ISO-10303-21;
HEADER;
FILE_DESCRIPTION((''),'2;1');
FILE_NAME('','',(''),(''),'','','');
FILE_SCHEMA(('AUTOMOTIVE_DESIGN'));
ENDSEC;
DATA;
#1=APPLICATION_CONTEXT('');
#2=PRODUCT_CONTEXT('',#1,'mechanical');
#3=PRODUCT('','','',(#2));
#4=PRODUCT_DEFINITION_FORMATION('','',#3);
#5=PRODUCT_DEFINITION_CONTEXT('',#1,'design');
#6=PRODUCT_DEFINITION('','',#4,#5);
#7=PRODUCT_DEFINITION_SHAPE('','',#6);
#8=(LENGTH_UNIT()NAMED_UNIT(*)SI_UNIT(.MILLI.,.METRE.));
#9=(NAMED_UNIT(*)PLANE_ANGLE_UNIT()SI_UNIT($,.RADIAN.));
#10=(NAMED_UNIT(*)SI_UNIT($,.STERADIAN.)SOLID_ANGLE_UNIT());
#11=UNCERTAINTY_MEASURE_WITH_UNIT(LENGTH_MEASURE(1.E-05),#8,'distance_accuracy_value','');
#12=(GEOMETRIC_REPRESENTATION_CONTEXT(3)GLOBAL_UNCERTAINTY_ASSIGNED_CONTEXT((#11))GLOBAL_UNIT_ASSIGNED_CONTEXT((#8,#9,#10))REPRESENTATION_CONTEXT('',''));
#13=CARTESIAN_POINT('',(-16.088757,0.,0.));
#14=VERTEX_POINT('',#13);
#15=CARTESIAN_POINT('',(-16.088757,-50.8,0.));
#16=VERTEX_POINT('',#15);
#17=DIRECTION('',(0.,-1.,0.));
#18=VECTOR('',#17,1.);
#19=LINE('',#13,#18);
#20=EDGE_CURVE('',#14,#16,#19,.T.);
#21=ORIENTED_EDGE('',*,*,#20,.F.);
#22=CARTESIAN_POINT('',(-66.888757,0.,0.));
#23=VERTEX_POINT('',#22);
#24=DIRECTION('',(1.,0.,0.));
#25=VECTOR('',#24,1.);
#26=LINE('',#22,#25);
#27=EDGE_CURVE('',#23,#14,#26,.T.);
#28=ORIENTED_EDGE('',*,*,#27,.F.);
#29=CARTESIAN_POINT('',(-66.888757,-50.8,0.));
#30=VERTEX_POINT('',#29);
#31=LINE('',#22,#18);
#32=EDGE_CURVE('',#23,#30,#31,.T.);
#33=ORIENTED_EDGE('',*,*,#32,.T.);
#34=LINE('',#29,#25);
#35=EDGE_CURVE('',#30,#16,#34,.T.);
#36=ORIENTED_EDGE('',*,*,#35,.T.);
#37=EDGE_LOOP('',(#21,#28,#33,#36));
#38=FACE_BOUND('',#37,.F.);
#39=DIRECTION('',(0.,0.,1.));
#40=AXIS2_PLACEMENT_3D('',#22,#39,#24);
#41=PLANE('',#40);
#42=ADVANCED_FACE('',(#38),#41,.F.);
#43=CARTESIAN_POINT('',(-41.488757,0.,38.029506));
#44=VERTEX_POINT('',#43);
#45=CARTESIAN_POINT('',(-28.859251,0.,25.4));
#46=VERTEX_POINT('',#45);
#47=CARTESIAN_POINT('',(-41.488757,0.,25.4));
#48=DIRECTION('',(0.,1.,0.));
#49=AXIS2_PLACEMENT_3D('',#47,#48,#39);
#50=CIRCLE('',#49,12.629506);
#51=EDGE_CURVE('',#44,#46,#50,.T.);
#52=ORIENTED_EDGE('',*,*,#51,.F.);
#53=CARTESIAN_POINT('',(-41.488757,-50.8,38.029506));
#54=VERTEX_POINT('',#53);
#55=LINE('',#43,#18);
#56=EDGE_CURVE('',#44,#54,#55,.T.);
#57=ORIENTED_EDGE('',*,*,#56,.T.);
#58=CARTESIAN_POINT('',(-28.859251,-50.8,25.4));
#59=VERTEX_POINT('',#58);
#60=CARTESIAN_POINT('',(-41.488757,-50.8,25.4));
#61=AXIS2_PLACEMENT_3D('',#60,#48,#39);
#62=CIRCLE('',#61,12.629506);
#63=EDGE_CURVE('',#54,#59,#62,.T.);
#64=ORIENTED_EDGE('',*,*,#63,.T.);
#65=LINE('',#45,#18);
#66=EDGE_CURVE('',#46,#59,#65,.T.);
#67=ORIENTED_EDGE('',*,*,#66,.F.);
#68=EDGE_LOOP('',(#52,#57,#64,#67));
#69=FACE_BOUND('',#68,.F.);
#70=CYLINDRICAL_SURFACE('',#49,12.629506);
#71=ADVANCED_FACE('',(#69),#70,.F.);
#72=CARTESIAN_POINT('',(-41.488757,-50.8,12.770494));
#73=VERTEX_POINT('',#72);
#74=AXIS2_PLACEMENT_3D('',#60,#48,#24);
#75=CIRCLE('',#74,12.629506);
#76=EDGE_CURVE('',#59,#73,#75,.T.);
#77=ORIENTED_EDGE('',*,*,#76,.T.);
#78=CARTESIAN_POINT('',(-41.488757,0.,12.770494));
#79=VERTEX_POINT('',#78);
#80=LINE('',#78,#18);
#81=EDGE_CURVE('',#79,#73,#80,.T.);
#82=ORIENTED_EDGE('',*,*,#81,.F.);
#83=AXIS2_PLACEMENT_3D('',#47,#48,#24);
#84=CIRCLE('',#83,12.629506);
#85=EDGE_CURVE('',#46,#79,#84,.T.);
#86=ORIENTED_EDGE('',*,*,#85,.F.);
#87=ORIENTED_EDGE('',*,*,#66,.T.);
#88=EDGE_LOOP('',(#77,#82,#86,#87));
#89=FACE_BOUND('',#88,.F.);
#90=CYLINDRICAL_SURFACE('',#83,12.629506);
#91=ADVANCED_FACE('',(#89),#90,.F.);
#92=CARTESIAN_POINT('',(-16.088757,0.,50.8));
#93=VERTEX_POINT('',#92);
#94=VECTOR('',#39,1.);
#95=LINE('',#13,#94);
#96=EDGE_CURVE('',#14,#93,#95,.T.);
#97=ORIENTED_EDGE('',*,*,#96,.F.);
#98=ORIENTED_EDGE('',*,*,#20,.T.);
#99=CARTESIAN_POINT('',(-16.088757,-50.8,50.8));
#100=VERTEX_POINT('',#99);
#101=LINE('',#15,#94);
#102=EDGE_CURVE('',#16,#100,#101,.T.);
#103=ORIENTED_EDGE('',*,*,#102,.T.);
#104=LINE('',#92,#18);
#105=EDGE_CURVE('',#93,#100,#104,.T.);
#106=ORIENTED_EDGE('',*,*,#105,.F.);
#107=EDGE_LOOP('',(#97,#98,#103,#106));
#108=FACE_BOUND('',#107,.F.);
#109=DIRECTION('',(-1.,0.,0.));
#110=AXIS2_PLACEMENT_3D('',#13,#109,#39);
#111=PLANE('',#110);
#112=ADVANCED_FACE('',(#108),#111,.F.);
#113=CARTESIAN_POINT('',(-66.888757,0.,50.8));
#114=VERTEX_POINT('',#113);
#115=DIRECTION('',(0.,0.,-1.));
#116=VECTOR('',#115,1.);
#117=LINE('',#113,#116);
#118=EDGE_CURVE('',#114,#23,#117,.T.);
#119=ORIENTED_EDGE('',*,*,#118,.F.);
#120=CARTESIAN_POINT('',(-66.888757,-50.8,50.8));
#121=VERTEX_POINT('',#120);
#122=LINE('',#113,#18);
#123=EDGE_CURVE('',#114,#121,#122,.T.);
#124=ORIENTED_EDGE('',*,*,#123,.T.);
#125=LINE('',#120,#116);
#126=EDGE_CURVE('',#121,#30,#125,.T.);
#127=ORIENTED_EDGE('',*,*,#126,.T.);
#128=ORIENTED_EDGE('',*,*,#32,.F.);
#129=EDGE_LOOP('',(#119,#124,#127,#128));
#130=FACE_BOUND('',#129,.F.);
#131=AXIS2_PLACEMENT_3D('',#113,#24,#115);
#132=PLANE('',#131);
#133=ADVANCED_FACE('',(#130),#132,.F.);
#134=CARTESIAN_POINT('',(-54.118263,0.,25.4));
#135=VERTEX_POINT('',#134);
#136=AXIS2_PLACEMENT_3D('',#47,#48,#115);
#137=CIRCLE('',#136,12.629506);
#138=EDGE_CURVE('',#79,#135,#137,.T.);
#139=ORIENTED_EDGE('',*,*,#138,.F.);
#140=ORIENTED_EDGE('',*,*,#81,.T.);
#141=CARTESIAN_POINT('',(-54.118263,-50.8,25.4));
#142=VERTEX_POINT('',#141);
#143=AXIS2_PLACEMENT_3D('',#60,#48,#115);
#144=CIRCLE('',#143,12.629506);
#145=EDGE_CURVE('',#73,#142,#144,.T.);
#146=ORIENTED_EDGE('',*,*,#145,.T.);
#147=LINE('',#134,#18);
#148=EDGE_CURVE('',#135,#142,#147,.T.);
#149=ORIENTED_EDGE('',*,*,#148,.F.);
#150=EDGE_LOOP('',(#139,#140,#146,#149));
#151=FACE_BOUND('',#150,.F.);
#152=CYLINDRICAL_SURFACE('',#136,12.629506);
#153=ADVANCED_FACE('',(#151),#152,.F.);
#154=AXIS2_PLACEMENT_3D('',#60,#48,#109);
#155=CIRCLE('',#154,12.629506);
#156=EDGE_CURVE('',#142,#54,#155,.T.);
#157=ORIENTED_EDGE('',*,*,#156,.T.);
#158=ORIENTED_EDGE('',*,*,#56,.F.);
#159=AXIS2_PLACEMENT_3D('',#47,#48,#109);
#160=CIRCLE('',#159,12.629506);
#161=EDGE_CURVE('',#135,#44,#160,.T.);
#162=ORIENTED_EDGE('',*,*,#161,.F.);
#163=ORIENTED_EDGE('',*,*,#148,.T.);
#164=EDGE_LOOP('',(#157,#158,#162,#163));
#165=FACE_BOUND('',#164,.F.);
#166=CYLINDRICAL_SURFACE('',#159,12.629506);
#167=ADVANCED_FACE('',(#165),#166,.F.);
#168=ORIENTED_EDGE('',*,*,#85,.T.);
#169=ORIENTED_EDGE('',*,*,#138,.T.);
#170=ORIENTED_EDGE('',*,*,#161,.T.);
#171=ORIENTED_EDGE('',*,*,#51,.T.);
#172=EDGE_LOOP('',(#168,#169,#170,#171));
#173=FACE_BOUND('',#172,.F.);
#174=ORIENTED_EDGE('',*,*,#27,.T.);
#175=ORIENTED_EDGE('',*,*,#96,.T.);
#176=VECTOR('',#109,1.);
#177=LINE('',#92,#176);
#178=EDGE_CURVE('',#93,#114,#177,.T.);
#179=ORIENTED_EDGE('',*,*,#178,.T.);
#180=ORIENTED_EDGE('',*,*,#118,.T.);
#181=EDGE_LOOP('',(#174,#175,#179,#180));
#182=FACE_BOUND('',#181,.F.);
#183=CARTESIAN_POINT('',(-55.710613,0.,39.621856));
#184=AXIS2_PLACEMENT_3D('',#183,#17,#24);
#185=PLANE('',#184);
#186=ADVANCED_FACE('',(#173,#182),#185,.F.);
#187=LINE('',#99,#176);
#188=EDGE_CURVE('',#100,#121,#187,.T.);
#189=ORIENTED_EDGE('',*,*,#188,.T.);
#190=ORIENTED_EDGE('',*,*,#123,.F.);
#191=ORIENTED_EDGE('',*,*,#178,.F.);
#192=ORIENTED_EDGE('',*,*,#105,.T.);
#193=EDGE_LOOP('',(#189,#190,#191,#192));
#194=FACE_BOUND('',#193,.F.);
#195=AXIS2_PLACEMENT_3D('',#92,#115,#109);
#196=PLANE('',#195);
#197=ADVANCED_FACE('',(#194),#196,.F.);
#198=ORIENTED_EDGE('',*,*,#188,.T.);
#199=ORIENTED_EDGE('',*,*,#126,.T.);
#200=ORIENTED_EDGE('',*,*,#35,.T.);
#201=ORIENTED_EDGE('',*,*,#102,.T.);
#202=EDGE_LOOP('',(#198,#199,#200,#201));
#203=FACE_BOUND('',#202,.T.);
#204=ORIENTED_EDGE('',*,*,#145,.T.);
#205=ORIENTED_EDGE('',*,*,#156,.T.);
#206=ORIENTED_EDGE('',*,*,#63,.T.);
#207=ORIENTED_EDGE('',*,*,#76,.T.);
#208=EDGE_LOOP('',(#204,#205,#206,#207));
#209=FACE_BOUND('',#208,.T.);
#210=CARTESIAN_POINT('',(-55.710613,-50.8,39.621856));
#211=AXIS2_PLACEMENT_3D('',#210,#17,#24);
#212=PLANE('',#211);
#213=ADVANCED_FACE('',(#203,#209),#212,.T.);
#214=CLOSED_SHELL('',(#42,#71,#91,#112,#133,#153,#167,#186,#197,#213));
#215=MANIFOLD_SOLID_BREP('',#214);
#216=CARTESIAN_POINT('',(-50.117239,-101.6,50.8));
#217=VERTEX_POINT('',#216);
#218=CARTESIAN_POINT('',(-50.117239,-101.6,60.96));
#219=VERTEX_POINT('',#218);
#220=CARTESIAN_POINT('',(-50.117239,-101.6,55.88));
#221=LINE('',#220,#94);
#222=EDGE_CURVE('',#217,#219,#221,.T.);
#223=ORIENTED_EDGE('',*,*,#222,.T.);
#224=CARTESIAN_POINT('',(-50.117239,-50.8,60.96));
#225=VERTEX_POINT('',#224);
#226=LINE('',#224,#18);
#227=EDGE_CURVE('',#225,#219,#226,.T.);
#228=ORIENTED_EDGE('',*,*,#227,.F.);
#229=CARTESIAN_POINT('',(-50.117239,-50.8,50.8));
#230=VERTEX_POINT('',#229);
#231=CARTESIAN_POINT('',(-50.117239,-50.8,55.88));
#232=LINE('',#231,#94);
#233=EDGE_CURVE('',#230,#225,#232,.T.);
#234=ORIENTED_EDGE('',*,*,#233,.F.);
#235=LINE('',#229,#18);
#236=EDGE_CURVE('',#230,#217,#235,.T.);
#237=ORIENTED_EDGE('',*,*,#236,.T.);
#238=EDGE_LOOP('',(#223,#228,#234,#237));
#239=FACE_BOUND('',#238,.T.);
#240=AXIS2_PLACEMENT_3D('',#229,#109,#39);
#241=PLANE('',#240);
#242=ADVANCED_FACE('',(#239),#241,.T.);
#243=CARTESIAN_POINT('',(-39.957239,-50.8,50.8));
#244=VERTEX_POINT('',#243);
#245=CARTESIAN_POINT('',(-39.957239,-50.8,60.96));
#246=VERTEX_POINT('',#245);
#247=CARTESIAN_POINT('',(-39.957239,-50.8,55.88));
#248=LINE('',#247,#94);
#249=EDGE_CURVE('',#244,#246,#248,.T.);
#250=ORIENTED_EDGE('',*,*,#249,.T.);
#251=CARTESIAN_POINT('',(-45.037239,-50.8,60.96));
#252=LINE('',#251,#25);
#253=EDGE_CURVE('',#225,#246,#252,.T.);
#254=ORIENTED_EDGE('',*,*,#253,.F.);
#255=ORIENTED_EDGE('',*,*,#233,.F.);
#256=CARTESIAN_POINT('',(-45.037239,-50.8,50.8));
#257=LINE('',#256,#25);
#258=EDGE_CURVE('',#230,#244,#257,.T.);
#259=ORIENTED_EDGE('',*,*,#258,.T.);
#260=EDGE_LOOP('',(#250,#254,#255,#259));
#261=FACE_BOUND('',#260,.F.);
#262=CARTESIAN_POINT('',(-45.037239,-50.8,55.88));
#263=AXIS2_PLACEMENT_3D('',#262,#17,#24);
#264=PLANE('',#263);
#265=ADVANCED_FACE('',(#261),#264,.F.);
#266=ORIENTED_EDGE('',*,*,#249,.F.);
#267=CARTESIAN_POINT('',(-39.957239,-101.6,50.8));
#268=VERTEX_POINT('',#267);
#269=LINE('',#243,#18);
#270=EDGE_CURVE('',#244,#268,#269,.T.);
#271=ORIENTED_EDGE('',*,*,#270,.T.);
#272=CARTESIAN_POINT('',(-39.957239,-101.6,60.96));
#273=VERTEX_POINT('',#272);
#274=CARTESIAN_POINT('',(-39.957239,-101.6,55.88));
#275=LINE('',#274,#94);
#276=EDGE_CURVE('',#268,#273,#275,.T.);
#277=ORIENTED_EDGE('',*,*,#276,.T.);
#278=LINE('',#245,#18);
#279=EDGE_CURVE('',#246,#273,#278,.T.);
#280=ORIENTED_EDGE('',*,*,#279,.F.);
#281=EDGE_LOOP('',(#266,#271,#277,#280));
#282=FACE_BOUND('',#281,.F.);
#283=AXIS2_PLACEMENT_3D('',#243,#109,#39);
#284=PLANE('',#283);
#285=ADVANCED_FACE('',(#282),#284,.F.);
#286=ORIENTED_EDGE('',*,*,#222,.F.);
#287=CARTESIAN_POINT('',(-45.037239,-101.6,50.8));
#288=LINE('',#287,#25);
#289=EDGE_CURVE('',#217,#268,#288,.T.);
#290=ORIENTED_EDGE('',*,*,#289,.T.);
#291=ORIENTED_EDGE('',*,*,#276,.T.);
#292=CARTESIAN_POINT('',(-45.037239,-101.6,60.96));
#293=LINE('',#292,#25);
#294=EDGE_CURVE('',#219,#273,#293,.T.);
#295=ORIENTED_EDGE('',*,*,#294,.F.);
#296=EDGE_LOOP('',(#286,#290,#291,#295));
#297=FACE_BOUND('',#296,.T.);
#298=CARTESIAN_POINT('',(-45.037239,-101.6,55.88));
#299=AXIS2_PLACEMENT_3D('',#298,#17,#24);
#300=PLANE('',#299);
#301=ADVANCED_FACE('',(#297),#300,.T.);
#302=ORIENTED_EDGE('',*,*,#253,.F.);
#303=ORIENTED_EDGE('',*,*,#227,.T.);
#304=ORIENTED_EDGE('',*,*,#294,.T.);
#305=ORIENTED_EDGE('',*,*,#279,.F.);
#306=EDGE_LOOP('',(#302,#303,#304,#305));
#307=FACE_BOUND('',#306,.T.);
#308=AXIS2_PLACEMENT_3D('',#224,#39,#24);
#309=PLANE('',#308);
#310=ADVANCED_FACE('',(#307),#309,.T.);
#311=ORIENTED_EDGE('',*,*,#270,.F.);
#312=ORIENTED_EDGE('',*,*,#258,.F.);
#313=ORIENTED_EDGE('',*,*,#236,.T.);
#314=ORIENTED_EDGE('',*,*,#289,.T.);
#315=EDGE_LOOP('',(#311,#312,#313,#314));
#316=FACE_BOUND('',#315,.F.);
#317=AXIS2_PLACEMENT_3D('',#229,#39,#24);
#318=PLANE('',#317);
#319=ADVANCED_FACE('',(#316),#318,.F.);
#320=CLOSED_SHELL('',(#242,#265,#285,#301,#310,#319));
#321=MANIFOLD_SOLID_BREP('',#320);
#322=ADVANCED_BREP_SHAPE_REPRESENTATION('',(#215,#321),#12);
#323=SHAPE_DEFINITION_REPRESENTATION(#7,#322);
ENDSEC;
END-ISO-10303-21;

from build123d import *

# Parameters (mm, degrees)
F1_DEPTH = 50.8
F2_W     = 10.16
F2_H     = 10.16
F3_DEPTH = 50.8


# Not quite as in the source:
# - a feature names something its author has since deleted; it is built from what else it names


with BuildPart() as f1:
    # F0 (on Front) → F1 (new body)
    with BuildSketch(Plane.XZ):
        with BuildLine():
            Line((-41.48875705, 50.8), (-66.88875705, 50.8))
            Line((-66.88875705, 50.8), (-66.88875705, 25.4))
            Line((-66.88875705, 25.4), (-54.1182633227, 25.4))
            ThreePointArc((-54.1182633227, 25.4), (-50.4191665784, 34.3304095284), (-41.48875705, 38.0295062726))
            Line((-41.48875705, 38.0295062726), (-41.48875705, 50.8))
        make_face()
        with BuildLine():
            Line((-54.1182633227, 25.4), (-66.88875705, 25.4))
            Line((-66.88875705, 25.4), (-66.88875705, 0))
            Line((-66.88875705, 0), (-41.48875705, 0))
            Line((-41.48875705, 0), (-41.48875705, 12.7704937274))
            ThreePointArc((-41.48875705, 12.7704937274), (-50.4191665784, 16.4695904716), (-54.1182633227, 25.4))
        make_face()
        with BuildLine():
            Line((-16.08875705, 50.8), (-41.48875705, 50.8))
            Line((-41.48875705, 50.8), (-41.48875705, 38.0295062726))
            ThreePointArc((-41.48875705, 38.0295062726), (-32.5583475216, 34.3304095284), (-28.8592507774, 25.4))
            Line((-28.8592507774, 25.4), (-16.08875705, 25.4))
            Line((-16.08875705, 25.4), (-16.08875705, 50.8))
        make_face()
        with BuildLine():
            Line((-41.48875705, 12.7704937274), (-41.48875705, 0))
            Line((-41.48875705, 0), (-16.08875705, 0))
            Line((-16.08875705, 0), (-16.08875705, 25.4))
            Line((-16.08875705, 25.4), (-28.8592507774, 25.4))
            ThreePointArc((-28.8592507774, 25.4), (-32.5583475216, 16.4695904716), (-41.48875705, 12.7704937274))
        make_face()
    extrude(amount=F1_DEPTH)


with BuildPart() as f3:
    # F2 (on face) → F3 (new body)
    with BuildSketch(Plane.XZ.offset(50.8)):
        with Locations((-45.037239356, 55.88)):
            Rectangle(F2_W, F2_H)
    extrude(amount=F3_DEPTH)


solid = Compound([f1.part, f3.part])
